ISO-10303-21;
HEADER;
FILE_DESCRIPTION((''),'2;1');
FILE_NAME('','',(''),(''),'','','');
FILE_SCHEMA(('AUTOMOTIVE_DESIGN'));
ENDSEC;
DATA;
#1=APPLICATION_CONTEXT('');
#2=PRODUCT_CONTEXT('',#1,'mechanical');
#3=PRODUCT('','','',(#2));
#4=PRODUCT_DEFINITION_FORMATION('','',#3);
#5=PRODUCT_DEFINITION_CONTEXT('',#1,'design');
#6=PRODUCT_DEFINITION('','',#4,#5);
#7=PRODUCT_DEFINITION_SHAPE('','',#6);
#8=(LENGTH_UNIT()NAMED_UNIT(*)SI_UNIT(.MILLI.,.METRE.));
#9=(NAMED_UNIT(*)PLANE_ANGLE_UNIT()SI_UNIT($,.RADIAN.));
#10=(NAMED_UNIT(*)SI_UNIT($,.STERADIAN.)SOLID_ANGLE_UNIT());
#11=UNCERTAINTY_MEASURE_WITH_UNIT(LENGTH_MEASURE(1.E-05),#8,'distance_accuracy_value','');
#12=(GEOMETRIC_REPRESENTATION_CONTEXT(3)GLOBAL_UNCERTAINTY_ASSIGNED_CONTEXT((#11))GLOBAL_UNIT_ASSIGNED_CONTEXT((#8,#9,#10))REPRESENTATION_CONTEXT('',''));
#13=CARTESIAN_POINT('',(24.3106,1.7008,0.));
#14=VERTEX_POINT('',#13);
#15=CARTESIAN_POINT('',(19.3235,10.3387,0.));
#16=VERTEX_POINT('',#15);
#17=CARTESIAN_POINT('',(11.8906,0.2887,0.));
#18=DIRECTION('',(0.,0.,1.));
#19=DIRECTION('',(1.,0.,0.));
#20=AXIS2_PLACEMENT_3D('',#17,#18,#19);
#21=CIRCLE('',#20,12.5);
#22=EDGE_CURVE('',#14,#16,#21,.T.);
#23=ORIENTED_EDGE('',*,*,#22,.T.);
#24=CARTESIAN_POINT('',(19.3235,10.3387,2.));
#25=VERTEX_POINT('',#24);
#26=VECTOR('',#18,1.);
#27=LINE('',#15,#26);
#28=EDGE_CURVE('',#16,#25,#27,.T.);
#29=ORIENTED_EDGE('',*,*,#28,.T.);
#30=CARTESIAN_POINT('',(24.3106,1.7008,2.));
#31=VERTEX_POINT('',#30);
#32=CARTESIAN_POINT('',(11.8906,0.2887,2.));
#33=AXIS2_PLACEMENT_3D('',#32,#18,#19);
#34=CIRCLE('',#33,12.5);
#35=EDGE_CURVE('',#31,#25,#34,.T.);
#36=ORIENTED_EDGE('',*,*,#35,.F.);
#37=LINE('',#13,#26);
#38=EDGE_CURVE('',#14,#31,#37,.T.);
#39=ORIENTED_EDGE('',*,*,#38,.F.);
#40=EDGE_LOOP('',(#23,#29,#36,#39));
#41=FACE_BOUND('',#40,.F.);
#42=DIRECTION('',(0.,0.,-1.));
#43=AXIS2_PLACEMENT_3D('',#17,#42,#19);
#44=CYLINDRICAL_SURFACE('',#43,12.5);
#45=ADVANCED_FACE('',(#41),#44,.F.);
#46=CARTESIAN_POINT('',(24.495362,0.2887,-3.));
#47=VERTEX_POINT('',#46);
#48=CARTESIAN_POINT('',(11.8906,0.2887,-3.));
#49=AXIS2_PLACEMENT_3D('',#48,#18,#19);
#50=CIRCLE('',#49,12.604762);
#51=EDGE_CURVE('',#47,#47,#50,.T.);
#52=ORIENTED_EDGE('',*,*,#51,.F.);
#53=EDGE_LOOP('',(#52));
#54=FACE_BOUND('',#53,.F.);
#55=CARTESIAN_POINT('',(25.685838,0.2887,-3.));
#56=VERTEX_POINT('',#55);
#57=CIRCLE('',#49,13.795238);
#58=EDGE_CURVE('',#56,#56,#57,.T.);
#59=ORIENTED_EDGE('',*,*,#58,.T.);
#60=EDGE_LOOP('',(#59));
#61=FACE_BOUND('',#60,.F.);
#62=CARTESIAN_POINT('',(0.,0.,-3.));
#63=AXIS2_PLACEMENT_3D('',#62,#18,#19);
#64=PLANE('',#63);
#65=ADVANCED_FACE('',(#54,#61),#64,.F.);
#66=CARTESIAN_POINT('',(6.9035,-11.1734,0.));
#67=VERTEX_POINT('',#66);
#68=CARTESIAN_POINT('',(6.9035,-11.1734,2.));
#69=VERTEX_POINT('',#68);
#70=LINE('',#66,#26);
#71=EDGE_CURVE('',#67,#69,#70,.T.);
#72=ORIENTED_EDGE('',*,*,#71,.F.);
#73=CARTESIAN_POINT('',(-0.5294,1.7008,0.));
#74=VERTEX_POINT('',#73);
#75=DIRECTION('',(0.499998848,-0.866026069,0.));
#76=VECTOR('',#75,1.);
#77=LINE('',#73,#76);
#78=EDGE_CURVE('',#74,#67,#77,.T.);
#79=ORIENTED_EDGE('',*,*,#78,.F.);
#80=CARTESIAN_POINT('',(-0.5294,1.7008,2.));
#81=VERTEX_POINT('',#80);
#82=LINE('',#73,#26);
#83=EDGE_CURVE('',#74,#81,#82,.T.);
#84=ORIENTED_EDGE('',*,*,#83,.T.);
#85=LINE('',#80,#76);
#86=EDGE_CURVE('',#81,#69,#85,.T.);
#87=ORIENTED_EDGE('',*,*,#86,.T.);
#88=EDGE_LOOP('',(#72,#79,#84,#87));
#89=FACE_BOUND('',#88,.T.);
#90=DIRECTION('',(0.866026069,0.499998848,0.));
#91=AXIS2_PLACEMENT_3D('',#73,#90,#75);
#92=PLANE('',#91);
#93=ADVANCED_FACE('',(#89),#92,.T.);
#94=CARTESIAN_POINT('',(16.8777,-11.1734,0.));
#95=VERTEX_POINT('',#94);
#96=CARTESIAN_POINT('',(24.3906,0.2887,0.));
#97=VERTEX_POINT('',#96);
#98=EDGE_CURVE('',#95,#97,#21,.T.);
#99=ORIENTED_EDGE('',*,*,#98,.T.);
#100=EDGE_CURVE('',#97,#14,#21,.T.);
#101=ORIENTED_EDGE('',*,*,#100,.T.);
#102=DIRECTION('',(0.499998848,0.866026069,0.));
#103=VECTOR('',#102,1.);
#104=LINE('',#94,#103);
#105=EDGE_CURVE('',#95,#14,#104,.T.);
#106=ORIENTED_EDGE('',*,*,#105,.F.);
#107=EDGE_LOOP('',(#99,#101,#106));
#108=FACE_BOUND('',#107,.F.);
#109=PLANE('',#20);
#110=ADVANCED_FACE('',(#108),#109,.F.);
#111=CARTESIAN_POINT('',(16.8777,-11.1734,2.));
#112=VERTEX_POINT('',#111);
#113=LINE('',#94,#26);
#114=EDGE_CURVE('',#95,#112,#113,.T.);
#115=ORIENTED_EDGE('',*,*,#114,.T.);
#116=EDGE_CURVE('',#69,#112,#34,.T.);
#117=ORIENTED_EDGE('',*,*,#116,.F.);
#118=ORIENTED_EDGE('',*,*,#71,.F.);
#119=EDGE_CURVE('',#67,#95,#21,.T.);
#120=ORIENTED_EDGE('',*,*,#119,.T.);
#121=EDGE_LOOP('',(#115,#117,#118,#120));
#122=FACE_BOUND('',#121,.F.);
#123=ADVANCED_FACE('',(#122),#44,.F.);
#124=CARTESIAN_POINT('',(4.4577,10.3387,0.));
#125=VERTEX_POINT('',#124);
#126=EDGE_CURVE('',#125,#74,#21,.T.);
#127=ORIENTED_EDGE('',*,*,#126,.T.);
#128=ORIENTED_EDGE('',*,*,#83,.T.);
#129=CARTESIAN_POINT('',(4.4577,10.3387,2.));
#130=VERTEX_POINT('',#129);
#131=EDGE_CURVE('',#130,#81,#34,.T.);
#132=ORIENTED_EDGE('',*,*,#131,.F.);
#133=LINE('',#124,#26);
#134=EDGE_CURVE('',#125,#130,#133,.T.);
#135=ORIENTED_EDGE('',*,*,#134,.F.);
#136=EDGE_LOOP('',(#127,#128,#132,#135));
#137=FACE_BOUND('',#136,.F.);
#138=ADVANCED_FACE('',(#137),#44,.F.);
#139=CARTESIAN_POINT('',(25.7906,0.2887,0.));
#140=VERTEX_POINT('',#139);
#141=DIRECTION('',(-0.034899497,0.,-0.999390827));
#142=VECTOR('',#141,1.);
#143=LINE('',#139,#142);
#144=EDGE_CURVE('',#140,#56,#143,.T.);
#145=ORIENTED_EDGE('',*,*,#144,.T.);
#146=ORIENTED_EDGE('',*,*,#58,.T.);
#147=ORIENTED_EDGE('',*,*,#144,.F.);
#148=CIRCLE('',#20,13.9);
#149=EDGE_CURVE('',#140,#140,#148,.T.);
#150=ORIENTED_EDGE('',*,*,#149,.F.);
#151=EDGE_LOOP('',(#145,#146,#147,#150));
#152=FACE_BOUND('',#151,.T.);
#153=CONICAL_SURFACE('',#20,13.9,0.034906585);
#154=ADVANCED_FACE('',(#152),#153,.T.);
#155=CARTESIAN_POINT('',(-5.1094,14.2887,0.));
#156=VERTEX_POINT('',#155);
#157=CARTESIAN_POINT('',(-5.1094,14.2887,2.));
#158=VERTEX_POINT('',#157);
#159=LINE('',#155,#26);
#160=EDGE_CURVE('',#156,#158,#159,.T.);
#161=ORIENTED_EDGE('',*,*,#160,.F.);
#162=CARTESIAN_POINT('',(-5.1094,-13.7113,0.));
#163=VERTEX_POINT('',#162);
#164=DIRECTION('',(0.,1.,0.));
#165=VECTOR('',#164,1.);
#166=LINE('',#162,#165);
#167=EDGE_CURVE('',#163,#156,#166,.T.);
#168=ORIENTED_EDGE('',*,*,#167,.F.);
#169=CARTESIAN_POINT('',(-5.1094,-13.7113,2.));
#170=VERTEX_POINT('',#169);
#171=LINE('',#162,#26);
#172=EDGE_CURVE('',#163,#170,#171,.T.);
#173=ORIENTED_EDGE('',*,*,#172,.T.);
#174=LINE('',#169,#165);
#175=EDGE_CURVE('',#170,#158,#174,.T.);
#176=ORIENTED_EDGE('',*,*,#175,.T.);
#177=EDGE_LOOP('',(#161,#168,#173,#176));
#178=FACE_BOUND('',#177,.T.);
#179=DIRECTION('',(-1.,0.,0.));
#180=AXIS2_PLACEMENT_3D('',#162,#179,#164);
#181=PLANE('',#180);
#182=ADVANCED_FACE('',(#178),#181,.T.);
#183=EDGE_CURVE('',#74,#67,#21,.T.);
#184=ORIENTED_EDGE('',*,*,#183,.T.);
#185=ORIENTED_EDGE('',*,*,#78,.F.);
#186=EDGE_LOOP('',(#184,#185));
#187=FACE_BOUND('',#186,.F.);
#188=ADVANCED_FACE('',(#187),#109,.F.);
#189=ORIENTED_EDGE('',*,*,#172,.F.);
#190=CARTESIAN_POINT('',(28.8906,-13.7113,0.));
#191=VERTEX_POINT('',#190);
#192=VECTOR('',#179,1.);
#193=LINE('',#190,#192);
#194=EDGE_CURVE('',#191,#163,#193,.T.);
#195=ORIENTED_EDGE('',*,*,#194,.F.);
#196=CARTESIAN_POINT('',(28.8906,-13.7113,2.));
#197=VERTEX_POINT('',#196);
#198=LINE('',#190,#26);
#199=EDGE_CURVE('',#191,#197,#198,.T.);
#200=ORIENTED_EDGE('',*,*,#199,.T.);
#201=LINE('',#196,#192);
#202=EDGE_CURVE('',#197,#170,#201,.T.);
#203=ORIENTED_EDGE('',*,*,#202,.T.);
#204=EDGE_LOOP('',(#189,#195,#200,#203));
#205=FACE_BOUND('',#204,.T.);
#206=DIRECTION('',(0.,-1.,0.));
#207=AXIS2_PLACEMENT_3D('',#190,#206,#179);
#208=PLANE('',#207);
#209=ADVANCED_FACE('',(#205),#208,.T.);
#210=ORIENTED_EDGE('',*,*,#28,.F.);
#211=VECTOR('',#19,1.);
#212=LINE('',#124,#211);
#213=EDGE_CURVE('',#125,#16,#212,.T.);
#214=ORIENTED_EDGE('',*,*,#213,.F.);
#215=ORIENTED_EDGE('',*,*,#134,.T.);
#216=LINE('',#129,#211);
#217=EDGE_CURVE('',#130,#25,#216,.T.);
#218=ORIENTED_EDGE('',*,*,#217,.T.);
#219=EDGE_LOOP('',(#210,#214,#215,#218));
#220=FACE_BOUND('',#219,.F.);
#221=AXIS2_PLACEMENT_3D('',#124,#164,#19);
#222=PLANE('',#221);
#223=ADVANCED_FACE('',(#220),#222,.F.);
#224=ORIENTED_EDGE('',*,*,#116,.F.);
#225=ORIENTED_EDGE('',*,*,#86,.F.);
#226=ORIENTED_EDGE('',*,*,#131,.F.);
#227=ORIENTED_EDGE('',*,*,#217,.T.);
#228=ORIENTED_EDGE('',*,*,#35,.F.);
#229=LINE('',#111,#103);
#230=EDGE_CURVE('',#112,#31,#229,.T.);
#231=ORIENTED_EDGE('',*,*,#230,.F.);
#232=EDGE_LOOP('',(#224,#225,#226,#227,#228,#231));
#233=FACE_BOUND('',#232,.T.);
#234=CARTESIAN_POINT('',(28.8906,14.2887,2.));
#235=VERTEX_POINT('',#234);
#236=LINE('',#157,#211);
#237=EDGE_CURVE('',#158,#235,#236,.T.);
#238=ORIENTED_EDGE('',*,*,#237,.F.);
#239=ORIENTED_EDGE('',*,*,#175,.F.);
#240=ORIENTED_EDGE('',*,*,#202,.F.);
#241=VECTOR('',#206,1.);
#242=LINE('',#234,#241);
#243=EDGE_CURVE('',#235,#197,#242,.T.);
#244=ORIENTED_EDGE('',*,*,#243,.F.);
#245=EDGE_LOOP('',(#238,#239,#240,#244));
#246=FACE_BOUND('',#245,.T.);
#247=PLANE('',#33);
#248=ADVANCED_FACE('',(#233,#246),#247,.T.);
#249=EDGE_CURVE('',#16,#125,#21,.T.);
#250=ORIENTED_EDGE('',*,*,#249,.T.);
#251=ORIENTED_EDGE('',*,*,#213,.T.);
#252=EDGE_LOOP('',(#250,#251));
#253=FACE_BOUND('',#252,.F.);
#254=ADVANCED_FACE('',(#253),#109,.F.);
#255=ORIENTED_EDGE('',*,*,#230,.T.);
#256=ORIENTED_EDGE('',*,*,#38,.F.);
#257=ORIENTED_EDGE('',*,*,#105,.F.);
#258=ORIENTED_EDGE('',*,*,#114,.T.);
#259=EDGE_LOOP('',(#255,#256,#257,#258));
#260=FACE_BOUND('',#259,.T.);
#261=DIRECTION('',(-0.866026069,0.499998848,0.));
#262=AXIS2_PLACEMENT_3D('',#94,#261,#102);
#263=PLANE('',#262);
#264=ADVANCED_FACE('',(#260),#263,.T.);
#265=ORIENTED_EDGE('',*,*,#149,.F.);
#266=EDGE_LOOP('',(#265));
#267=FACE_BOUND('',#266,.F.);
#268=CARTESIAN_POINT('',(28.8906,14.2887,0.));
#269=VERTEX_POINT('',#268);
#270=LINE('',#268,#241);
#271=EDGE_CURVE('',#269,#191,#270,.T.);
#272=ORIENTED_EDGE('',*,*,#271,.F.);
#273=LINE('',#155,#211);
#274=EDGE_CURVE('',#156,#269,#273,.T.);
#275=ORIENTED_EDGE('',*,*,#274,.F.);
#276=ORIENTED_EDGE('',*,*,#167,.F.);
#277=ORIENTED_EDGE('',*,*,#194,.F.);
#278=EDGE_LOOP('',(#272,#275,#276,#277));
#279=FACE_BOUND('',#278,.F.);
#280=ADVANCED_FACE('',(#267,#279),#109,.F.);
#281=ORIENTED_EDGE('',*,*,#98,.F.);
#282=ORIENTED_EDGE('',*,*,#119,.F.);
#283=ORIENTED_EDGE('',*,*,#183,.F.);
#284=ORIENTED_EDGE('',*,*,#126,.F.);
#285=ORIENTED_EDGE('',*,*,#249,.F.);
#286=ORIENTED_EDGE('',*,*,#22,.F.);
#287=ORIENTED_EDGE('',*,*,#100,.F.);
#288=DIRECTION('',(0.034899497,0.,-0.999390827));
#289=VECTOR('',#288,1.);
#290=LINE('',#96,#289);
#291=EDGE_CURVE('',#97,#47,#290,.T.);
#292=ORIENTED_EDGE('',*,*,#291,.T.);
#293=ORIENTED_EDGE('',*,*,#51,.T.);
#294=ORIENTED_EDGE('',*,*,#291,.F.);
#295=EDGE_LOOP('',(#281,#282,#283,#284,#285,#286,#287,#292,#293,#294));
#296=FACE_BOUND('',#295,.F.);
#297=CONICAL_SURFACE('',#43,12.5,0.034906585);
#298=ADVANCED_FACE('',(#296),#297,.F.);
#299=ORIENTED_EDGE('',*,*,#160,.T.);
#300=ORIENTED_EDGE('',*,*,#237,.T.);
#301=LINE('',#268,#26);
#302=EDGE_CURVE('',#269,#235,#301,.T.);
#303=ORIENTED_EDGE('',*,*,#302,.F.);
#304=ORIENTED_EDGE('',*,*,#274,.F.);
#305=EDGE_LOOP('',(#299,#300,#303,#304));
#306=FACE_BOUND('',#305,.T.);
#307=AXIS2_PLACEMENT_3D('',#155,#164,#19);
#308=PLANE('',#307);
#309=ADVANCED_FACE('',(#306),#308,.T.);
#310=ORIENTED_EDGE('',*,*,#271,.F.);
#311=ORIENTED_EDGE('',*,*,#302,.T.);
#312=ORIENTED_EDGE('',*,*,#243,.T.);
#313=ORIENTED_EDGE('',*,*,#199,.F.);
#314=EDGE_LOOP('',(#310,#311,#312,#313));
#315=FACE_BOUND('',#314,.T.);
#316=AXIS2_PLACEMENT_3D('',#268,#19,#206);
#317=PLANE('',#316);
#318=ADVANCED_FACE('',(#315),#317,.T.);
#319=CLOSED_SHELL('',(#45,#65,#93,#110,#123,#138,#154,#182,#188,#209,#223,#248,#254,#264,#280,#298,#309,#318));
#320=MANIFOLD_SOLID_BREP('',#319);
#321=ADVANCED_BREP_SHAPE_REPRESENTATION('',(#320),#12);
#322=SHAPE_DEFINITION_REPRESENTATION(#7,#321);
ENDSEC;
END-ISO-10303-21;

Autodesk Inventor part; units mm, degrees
ref_plane "YZ Plane" through (0, 0, 0) normal (1, 0, 0) x (0, 1, 0)
ref_plane "XZ Plane" through (0, 0, 0) normal (0, 1, 0) x (-1, 0, 0)
ref_plane "XY Plane" through (0, 0, 0) normal (0, 0, 1) x (1, 0, 0)
ref_plane "Work Plane1" through (0, 0, 0) normal (0, 0, 1) x (1, 0, 0)
sketch "Sketch1" plane through (0, 0, 0) normal (0, 0, 1) x (1, 0, 0)
  circle A0 centre (11.8906, 0.2887) radius 14 construction
  line L0 (-4.1094, 7.6362) -> (-12.7094, 0.2473) construction
  line L1 (-5.7094, 0.2473) -> (-12.7094, 0.2473) construction
  line L2 (-5.7094, -6.0861) -> (-5.7094, 0.2473) construction
  line L3 (-6.0301, -6.0861) -> (-5.7094, -6.0861) construction
  line L4 (-6.0301, -6.0861) -> (-4.1094, -7.5697) construction
  line L5 (-4.1094, -7.5697) -> (-4.1094, -15.7113) construction
  line L6 (-4.1094, -15.7113) -> (27.8906, -15.7113) construction
  line L7 (27.8906, -15.7113) -> (27.8906, -7.5697) construction
  line L8 (29.8113, -6.0861) -> (27.8906, -7.5697) construction
  line L9 (29.4906, -6.0861) -> (29.8113, -6.0861) construction
  line L10 (29.4906, 0.2473) -> (29.4906, -6.0861) construction
  line L11 (36.4906, 0.2473) -> (29.4906, 0.2473) construction
  line L12 (27.8906, 7.6362) -> (36.4906, 0.2473) construction
  line L13 (27.8906, 7.6362) -> (27.8906, 16.2887) construction
  line L14 (27.8906, 16.2887) -> (-4.1094, 16.2887) construction
  line L15 (-4.1094, 16.2887) -> (-4.1094, 7.6362) construction
  circle A1 centre (11.8906, 0.2887) radius 13.9
  circle A2 centre (11.8906, 0.2887) radius 12.5
  point P0 (0, 0)
  dimension "d0" = 27.8
  dimension "d1" = 25
extrude "Extrusion1" add sketch "Sketch1" against normal blind 3 draft -2
sketch "Sketch2" plane through (11.8906, 0.2887, 0) normal (0, 0, 1) x (1, 0, 0)
  circle A0 centre (0, 0) radius 13.9 projected
  circle A1 centre (0, 0) radius 12.5 projected
  line L0 (17, -14) -> (-17, -14)
  line L1 (-17, -14) -> (-17, 14)
  line L2 (-17, 14) -> (17, 14)
  line L3 (17, 14) -> (17, -14)
  line L4 (17, -14) -> (-17, 14) construction
  line L5 (-17, -14) -> (17, 14) construction
  circle A2 centre (0, 0) radius 10.05 construction
  line L6 (-7.4329, 10.05) -> (7.4329, 10.05)
  line L7 (-12.42, 1.4121) -> (-4.9871, -11.4621)
  line L8 (4.9871, -11.4621) -> (12.42, 1.4121)
  point P0 (-11.8906, -0.2887)
  dimension "d4" = 34
  dimension "d5" = 28
  dimension "d8" = 20.1
  dimension "d9" = 60
  dimension "d10" = 60
  dimension "d11" = 0
extrude "Extrusion2" add sketch "Sketch2" along normal blind 2 contours A0 | A1 L8 | L6 A1 | A1 L7 | L0 L1 L2 L3
properties part number "20_Cube_Insert_Z-Focus_objectivemount"
